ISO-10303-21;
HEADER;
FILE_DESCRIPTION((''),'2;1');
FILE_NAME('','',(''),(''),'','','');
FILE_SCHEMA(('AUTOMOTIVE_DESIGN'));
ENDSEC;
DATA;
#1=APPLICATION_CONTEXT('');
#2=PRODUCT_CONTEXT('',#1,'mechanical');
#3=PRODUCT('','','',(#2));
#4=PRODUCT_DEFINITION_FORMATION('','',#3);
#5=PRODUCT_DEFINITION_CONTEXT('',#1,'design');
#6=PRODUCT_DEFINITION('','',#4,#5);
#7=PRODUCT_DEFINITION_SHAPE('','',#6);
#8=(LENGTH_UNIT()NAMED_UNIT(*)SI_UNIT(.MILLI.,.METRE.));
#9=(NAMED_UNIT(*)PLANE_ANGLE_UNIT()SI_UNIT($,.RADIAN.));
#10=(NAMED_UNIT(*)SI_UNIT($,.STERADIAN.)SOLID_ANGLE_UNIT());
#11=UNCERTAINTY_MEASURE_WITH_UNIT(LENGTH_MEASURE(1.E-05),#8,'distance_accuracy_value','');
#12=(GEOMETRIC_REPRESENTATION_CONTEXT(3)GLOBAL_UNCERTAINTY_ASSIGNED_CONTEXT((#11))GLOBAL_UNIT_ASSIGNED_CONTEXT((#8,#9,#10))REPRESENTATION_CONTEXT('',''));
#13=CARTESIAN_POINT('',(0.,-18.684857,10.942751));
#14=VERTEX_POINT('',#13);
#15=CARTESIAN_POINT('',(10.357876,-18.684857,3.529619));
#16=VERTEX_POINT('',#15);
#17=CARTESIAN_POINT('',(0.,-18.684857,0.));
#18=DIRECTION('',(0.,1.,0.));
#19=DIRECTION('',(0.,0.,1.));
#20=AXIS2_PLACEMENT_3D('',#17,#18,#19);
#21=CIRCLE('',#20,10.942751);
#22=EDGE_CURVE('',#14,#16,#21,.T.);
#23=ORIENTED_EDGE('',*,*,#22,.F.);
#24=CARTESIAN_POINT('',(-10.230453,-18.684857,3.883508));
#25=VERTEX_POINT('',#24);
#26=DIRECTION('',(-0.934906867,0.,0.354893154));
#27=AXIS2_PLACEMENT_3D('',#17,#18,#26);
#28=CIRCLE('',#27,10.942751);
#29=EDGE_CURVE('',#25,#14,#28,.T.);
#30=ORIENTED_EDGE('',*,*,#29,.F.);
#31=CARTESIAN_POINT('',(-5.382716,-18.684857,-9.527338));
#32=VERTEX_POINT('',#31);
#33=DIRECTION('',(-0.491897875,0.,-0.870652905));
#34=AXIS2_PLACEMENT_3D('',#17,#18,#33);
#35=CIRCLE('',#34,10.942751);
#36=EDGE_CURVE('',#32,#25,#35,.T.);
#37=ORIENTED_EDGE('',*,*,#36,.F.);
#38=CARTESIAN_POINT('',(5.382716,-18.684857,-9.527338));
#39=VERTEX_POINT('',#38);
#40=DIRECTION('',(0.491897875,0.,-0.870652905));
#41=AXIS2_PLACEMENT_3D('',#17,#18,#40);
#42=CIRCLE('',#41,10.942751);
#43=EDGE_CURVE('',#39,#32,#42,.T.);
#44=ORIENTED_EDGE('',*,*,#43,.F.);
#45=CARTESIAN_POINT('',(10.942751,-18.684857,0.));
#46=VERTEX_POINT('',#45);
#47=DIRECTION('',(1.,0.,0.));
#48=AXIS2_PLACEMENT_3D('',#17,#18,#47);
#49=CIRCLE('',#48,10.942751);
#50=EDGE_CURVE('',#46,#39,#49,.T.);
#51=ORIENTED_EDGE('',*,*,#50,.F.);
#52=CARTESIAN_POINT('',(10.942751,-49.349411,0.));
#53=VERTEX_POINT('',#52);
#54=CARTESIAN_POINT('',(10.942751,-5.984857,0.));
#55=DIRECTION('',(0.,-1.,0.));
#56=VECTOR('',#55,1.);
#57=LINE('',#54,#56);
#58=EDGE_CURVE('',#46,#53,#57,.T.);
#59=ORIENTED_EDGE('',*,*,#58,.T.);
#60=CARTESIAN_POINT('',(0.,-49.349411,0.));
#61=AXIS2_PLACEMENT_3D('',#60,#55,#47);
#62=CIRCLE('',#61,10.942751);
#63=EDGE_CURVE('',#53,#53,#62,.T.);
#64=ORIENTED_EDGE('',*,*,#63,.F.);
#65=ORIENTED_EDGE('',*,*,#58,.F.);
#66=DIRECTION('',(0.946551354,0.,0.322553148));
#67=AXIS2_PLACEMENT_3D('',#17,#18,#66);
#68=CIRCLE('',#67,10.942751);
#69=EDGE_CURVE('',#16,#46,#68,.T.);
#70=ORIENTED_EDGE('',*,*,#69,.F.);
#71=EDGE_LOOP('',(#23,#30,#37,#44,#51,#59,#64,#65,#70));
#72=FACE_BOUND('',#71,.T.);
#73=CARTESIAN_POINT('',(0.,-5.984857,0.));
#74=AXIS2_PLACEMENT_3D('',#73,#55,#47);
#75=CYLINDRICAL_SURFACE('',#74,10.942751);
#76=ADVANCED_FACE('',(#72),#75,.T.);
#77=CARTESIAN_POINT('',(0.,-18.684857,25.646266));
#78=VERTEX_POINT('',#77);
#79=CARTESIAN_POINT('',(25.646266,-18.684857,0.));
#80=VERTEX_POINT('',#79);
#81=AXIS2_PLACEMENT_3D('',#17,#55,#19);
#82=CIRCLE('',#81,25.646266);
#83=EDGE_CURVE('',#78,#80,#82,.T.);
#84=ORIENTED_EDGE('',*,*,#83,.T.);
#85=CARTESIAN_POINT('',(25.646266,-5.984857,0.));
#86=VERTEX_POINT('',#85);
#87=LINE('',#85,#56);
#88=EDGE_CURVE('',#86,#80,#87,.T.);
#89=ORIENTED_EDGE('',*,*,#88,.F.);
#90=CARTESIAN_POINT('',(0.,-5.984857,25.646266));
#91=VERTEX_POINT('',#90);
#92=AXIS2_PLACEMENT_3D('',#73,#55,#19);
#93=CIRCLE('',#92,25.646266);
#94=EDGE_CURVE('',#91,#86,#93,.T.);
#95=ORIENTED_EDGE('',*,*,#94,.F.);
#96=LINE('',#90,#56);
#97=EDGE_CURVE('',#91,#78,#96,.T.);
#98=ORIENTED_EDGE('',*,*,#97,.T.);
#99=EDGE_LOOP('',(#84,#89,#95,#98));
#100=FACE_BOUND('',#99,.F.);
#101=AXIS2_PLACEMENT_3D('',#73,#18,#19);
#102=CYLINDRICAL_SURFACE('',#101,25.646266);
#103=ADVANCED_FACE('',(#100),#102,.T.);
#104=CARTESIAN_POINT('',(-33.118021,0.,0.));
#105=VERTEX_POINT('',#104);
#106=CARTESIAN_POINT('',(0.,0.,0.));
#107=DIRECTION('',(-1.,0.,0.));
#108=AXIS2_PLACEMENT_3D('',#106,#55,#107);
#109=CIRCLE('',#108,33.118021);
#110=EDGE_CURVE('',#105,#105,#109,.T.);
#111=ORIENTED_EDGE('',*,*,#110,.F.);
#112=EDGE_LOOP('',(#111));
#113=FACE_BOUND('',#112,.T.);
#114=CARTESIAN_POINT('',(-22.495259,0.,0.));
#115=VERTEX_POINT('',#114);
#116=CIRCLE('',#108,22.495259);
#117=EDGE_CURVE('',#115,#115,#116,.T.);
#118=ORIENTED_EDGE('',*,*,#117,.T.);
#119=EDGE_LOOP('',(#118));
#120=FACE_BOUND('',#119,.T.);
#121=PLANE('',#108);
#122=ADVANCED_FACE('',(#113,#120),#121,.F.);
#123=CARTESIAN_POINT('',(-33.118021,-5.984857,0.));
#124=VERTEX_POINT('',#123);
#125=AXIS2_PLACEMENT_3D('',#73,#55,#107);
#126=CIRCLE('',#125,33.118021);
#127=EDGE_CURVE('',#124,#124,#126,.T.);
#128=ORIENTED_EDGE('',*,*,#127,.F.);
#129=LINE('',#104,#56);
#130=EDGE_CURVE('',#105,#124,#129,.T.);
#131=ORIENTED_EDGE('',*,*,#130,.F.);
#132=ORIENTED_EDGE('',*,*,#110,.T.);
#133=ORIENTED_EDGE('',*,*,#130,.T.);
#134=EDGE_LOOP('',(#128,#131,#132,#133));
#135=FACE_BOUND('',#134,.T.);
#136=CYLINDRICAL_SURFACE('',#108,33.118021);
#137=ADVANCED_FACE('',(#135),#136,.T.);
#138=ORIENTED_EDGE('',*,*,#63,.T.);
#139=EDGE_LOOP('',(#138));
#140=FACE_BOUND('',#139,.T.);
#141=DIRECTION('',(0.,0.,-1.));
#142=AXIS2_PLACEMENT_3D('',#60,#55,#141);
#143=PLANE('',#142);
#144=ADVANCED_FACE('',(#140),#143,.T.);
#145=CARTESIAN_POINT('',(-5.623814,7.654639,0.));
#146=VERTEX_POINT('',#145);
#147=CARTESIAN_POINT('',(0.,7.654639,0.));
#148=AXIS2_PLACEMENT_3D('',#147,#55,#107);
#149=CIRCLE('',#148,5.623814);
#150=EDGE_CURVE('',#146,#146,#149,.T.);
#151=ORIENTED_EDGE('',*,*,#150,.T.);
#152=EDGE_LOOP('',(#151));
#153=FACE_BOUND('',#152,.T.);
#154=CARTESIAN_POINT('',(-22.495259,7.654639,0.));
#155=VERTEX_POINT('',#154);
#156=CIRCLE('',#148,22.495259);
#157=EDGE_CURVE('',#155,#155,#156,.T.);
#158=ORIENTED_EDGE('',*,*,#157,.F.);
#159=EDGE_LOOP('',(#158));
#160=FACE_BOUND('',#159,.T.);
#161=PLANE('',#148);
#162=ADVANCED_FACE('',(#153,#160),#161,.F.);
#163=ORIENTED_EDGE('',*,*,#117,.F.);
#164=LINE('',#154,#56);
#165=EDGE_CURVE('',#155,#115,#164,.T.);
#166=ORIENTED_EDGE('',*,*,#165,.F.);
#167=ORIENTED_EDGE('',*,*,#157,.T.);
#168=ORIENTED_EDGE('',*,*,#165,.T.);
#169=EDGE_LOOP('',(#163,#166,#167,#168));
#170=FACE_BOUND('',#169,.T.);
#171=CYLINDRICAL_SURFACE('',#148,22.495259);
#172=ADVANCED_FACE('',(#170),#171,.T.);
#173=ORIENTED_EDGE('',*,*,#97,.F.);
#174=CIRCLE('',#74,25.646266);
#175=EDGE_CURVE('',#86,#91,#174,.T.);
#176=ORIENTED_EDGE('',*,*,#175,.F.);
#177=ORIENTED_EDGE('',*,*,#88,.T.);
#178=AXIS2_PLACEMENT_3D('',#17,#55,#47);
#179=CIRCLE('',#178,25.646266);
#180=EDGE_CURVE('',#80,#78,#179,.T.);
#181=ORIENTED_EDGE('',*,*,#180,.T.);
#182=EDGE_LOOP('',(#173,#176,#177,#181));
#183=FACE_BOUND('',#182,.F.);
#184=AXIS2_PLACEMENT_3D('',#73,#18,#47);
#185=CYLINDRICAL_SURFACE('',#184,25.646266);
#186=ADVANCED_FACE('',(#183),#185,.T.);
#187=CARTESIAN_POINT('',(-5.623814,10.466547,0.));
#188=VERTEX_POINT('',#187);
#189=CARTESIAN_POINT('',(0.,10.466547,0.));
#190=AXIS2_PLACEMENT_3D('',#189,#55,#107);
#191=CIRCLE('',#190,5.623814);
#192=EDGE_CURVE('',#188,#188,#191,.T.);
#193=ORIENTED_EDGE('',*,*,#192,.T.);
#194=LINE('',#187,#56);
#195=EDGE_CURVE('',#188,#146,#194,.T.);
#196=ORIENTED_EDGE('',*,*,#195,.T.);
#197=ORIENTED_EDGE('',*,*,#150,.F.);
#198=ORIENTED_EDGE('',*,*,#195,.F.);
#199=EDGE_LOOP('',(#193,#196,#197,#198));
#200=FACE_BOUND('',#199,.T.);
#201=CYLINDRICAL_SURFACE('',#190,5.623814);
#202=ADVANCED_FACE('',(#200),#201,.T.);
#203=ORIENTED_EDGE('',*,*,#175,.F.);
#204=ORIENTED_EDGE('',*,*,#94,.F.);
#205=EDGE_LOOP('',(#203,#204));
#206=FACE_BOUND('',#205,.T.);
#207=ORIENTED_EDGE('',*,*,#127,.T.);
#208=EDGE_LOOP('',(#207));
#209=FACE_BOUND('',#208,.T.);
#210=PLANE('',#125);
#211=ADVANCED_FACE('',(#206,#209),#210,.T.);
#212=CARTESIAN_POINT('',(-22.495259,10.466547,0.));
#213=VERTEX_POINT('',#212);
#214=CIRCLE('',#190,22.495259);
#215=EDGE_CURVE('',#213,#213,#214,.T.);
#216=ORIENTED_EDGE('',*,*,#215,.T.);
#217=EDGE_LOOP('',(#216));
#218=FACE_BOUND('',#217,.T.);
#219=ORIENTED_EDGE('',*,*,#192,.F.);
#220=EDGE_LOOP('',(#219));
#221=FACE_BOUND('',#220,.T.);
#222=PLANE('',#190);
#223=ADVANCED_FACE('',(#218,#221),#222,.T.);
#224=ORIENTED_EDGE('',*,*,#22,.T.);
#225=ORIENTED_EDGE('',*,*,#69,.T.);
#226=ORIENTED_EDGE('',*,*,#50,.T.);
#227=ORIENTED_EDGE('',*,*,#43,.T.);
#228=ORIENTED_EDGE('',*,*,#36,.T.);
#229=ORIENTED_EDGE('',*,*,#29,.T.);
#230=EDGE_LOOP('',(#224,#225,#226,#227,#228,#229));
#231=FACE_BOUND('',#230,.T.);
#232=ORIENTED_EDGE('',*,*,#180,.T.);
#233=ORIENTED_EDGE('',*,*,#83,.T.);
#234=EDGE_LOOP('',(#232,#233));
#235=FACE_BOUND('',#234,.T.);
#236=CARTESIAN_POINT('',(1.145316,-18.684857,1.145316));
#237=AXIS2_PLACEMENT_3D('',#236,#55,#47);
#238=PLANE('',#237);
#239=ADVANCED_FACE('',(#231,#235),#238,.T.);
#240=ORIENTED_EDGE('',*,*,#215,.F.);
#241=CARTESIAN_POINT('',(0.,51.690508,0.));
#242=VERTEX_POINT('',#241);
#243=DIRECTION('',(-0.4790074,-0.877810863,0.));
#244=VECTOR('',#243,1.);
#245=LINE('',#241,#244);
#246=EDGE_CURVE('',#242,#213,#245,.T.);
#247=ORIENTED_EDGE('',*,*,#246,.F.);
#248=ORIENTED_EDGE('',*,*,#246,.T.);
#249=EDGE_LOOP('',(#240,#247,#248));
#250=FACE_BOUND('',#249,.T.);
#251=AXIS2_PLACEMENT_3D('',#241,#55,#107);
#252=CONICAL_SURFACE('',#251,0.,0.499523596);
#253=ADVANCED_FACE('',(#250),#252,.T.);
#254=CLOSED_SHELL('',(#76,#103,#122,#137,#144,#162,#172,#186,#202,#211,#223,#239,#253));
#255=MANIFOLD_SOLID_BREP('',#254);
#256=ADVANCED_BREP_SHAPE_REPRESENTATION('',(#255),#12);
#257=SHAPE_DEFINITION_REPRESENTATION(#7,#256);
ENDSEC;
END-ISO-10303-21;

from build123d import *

# Parameters (mm, degrees)
F2_R     = 10.9427513267
F6_DEPTH = 12.7


# Not quite as in the source:
# - a feature of the source that left no trace in its solid (it failed there, or was rolled back) is left out


with BuildPart() as f1:
    # F0 (on Top) → F1 (revolve)
    with BuildSketch(Plane.XY):
        Polygon((-22.4952585995, 7.654638961), (-22.4952585995, 0), (0, 0), (0, 51.6905076802), (-22.4952585995, 10.4665467516), (-5.6238141842, 10.4665467516), (-5.6238141842, 7.654638961), align=None)
        Polygon((-22.4952585995, 0), (-33.1180207431, 0), (-33.1180207431, -5.9848567471), (0, -5.9848567471), (0, 0), align=None)
    revolve(axis=Axis((0, -2.9924283735, 0), (0, -1, 0)))

    # F4: sweep along a path in F3
    with BuildLine(Plane.XY) as f4_path:
        Line((0, -6.7567974329), (0, -50.1213520765))
    # F2 (on face) → F4 (sweep)
    with BuildSketch(Plane.XZ.offset(5.9848567471)):
        Circle(F2_R)
    sweep(path=f4_path.line)

    # F5 (on face) → F6 (join)
    with BuildSketch(Plane.XZ.offset(5.9848567471)):
        with BuildLine():
            ThreePointArc((0, 25.6462656645), (-18.1346483635, -18.1346483635), (25.6462656645, 0))
            ThreePointArc((25.6462656645, 0), (18.1346483635, 18.1346483635), (0, 25.6462656645))
        make_face()
        with BuildLine():
            ThreePointArc((-10.2304533567, 3.8835075273), (-6.214802871, 9.0066659687), (0, 10.9427513267))
            ThreePointArc((0, 10.9427513267), (6.3686758751, 8.8985265182), (10.3578760896, 3.5296188901))
            ThreePointArc((10.3578760896, 3.5296188901), (10.7955423421, 1.7888745451), (10.9427513267, 0))
            ThreePointArc((10.9427513267, 0), (9.4510721789, -5.5155272882), (5.3827161292, -9.5273382259))
            ThreePointArc((5.3827161292, -9.5273382259), (0, -10.9427513267), (-5.3827161292, -9.5273382259))
            ThreePointArc((-5.3827161292, -9.5273382259), (-10.2910379118, -3.7199926472), (-10.2304533567, 3.8835075273))
        make_face(mode=Mode.SUBTRACT)
    extrude(amount=F6_DEPTH)


solid = f1.part
